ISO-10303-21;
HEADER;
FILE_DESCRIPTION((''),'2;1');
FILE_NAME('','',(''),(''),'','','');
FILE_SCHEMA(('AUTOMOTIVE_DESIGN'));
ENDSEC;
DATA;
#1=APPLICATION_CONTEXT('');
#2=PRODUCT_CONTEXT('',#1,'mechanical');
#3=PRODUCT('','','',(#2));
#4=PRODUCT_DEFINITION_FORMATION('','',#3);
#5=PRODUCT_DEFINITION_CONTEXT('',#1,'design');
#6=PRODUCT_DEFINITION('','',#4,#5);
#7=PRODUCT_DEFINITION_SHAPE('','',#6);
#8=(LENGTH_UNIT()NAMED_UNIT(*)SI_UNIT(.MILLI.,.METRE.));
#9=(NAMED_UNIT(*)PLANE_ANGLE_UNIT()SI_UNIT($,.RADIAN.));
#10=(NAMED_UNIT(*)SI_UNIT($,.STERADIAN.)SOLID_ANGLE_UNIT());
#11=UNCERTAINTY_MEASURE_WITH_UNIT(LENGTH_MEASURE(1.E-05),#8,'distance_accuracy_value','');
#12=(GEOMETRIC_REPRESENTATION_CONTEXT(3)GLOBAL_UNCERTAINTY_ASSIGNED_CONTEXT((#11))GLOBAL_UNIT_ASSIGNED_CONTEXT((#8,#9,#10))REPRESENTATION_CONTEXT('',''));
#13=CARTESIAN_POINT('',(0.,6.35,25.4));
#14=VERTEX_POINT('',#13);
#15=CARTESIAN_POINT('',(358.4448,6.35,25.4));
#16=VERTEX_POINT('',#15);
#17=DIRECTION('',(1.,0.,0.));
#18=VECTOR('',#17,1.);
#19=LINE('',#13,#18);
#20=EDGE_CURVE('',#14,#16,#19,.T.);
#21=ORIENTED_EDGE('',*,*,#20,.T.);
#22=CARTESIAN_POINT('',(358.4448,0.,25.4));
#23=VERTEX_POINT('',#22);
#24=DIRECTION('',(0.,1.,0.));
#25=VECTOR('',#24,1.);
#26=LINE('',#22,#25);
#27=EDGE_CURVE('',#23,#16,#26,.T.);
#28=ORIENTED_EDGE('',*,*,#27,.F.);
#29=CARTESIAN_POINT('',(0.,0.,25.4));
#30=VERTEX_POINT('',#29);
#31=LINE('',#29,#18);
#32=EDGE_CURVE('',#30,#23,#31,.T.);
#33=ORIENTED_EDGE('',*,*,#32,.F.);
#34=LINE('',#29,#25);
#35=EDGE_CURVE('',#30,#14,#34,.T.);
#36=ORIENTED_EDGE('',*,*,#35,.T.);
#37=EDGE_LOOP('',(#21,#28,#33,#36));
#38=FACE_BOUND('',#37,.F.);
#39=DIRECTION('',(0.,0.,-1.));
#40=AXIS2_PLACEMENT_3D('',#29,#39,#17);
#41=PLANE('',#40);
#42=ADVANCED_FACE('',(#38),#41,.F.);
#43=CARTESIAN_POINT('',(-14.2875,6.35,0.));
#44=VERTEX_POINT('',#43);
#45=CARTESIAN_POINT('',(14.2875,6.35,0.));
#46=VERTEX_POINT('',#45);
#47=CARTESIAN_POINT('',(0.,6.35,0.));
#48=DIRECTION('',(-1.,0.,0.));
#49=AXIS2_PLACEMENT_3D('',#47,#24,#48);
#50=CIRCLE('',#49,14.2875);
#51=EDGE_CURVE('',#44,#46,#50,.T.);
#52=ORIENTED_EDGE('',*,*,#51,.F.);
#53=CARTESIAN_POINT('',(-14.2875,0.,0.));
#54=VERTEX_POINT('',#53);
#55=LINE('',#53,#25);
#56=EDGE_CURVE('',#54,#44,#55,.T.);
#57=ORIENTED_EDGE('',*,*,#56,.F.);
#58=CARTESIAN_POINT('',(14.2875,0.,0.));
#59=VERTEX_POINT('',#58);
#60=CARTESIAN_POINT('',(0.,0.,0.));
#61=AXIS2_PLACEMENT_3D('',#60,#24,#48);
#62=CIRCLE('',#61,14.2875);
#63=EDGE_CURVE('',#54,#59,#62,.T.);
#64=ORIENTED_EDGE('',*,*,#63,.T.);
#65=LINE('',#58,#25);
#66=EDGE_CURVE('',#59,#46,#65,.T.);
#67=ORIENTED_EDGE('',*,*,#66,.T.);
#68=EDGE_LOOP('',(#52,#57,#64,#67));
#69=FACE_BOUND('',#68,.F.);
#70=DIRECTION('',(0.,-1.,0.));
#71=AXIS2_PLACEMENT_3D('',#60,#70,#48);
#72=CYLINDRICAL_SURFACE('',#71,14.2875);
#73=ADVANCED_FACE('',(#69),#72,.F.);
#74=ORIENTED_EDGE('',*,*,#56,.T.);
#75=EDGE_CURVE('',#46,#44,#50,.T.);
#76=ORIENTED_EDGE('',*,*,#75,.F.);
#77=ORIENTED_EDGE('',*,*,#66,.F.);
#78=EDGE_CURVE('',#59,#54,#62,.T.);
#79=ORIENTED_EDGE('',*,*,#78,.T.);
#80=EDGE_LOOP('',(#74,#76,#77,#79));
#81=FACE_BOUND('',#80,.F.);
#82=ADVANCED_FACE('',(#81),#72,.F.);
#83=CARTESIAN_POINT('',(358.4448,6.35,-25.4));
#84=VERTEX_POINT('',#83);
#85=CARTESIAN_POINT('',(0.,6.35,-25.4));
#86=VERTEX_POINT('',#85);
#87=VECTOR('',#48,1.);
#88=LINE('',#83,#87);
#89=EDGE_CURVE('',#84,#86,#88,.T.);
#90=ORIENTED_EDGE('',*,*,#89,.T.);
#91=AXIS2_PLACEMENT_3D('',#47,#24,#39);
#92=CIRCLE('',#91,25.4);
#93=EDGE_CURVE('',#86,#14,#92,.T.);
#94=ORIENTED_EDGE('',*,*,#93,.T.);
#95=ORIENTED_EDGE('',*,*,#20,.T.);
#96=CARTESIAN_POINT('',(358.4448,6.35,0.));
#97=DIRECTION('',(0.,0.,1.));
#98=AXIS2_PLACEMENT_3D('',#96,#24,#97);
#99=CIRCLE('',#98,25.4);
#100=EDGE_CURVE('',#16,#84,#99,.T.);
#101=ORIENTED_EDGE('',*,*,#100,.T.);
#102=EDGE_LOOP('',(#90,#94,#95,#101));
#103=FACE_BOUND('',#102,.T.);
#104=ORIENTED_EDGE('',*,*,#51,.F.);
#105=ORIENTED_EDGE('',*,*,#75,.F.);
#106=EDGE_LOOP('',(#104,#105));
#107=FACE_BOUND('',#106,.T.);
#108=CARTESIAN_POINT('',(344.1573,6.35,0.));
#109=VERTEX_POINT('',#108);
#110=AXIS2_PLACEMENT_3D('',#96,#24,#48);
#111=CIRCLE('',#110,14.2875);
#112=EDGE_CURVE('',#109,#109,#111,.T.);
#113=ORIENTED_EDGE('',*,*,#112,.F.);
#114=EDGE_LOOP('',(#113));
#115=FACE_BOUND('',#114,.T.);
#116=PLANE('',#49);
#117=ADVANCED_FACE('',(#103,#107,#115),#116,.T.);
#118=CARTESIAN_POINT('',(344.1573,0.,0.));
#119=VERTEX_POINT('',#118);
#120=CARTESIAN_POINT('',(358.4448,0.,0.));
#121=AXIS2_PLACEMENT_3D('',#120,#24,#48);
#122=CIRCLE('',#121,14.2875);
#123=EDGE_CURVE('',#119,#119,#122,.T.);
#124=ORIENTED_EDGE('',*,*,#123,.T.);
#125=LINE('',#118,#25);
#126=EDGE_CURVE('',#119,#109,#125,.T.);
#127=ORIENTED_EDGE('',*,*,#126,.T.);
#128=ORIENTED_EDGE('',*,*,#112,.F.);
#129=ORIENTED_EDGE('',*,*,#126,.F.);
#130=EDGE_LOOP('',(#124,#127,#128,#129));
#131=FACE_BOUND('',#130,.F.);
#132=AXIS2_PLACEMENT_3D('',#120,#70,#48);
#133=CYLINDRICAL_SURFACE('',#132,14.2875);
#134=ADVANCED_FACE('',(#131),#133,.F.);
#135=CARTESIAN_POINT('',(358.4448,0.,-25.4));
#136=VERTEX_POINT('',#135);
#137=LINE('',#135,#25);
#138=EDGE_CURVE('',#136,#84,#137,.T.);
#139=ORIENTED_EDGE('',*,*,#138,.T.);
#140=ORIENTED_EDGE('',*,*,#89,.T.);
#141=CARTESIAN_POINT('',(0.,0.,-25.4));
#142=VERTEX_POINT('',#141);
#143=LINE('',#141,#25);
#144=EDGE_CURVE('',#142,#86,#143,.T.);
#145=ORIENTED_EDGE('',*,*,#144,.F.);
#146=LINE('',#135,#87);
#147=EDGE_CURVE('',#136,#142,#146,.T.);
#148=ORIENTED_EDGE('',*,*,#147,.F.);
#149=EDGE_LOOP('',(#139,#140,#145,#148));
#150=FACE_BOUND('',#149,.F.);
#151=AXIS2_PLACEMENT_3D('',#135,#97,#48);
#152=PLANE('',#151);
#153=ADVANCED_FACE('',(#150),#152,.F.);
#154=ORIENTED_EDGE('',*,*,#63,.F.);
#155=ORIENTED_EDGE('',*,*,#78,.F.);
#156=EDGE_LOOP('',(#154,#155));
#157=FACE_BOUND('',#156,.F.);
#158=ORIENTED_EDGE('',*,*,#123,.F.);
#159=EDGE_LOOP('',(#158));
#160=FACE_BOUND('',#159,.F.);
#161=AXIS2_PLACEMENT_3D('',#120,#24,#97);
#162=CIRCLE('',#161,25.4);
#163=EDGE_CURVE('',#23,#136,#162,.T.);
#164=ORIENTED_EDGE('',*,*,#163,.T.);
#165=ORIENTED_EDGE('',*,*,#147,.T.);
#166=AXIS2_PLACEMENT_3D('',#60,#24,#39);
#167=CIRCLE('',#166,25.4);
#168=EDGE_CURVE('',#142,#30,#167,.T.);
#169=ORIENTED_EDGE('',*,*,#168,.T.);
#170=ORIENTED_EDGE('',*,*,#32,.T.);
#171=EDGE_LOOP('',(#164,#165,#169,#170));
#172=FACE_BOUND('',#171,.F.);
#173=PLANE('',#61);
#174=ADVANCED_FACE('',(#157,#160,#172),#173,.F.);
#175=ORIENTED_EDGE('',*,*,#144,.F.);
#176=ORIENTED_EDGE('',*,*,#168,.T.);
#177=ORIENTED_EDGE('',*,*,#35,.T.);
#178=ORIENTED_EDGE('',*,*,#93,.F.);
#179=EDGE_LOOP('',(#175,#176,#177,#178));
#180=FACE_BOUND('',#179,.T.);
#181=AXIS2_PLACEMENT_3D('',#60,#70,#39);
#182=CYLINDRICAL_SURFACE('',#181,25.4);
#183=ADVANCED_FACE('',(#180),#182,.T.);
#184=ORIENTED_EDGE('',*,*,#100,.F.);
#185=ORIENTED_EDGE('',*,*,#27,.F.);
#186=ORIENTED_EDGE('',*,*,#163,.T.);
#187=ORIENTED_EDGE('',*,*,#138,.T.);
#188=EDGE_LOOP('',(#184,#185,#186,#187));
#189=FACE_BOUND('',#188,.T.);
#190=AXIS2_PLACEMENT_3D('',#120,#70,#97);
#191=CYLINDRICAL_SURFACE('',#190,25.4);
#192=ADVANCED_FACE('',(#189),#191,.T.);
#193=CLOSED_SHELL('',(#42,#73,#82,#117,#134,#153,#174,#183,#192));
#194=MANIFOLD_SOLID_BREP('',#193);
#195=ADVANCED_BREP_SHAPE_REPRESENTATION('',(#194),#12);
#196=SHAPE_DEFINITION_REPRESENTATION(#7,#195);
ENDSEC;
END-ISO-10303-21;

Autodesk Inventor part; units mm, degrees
ref_plane "YZ Plane" through (0, 0, 0) normal (1, 0, 0) x (0, 1, 0)
ref_plane "XZ Plane" through (0, 0, 0) normal (0, 1, 0) x (-1, 0, 0)
ref_plane "XY Plane" through (0, 0, 0) normal (0, 0, 1) x (1, 0, 0)
sketch "Sketch1" plane through (0, 0, 0) normal (0, 1, 0) x (-1, 0, 0)
  line L0 (0, 0) -> (-358.4448, 0)
  line L1 (0, 0) -> (-358.4448, 0) construction
  line L2 (0, 0) -> (-358.4448, 0) construction
  line L3 (0, 25.4) -> (-358.4448, 25.4)
  line L4 (-358.4448, -25.4) -> (0, -25.4)
  arc A0 (0, -25.4) -> (0, 25.4) centre (0, 0) ccw
  arc A1 (-358.4448, 25.4) -> (-358.4448, -25.4) centre (-358.4448, 0) ccw
  circle A2 centre (0, 0) radius 14.2875
  circle A3 centre (-358.4448, 0) radius 14.2875
  point P0 (-179.2224, 0)
  point P1 (-179.2224, 0)
  dimension "d0" = 358.4448
  dimension "d8" = 50.8
  dimension "d9" = 28.575
  dimension "d10" = 28.575
extrude "Extrusion1" add sketch "Sketch1" along normal blind 6.35
properties part number "4-bar intake (14.112) bar"
